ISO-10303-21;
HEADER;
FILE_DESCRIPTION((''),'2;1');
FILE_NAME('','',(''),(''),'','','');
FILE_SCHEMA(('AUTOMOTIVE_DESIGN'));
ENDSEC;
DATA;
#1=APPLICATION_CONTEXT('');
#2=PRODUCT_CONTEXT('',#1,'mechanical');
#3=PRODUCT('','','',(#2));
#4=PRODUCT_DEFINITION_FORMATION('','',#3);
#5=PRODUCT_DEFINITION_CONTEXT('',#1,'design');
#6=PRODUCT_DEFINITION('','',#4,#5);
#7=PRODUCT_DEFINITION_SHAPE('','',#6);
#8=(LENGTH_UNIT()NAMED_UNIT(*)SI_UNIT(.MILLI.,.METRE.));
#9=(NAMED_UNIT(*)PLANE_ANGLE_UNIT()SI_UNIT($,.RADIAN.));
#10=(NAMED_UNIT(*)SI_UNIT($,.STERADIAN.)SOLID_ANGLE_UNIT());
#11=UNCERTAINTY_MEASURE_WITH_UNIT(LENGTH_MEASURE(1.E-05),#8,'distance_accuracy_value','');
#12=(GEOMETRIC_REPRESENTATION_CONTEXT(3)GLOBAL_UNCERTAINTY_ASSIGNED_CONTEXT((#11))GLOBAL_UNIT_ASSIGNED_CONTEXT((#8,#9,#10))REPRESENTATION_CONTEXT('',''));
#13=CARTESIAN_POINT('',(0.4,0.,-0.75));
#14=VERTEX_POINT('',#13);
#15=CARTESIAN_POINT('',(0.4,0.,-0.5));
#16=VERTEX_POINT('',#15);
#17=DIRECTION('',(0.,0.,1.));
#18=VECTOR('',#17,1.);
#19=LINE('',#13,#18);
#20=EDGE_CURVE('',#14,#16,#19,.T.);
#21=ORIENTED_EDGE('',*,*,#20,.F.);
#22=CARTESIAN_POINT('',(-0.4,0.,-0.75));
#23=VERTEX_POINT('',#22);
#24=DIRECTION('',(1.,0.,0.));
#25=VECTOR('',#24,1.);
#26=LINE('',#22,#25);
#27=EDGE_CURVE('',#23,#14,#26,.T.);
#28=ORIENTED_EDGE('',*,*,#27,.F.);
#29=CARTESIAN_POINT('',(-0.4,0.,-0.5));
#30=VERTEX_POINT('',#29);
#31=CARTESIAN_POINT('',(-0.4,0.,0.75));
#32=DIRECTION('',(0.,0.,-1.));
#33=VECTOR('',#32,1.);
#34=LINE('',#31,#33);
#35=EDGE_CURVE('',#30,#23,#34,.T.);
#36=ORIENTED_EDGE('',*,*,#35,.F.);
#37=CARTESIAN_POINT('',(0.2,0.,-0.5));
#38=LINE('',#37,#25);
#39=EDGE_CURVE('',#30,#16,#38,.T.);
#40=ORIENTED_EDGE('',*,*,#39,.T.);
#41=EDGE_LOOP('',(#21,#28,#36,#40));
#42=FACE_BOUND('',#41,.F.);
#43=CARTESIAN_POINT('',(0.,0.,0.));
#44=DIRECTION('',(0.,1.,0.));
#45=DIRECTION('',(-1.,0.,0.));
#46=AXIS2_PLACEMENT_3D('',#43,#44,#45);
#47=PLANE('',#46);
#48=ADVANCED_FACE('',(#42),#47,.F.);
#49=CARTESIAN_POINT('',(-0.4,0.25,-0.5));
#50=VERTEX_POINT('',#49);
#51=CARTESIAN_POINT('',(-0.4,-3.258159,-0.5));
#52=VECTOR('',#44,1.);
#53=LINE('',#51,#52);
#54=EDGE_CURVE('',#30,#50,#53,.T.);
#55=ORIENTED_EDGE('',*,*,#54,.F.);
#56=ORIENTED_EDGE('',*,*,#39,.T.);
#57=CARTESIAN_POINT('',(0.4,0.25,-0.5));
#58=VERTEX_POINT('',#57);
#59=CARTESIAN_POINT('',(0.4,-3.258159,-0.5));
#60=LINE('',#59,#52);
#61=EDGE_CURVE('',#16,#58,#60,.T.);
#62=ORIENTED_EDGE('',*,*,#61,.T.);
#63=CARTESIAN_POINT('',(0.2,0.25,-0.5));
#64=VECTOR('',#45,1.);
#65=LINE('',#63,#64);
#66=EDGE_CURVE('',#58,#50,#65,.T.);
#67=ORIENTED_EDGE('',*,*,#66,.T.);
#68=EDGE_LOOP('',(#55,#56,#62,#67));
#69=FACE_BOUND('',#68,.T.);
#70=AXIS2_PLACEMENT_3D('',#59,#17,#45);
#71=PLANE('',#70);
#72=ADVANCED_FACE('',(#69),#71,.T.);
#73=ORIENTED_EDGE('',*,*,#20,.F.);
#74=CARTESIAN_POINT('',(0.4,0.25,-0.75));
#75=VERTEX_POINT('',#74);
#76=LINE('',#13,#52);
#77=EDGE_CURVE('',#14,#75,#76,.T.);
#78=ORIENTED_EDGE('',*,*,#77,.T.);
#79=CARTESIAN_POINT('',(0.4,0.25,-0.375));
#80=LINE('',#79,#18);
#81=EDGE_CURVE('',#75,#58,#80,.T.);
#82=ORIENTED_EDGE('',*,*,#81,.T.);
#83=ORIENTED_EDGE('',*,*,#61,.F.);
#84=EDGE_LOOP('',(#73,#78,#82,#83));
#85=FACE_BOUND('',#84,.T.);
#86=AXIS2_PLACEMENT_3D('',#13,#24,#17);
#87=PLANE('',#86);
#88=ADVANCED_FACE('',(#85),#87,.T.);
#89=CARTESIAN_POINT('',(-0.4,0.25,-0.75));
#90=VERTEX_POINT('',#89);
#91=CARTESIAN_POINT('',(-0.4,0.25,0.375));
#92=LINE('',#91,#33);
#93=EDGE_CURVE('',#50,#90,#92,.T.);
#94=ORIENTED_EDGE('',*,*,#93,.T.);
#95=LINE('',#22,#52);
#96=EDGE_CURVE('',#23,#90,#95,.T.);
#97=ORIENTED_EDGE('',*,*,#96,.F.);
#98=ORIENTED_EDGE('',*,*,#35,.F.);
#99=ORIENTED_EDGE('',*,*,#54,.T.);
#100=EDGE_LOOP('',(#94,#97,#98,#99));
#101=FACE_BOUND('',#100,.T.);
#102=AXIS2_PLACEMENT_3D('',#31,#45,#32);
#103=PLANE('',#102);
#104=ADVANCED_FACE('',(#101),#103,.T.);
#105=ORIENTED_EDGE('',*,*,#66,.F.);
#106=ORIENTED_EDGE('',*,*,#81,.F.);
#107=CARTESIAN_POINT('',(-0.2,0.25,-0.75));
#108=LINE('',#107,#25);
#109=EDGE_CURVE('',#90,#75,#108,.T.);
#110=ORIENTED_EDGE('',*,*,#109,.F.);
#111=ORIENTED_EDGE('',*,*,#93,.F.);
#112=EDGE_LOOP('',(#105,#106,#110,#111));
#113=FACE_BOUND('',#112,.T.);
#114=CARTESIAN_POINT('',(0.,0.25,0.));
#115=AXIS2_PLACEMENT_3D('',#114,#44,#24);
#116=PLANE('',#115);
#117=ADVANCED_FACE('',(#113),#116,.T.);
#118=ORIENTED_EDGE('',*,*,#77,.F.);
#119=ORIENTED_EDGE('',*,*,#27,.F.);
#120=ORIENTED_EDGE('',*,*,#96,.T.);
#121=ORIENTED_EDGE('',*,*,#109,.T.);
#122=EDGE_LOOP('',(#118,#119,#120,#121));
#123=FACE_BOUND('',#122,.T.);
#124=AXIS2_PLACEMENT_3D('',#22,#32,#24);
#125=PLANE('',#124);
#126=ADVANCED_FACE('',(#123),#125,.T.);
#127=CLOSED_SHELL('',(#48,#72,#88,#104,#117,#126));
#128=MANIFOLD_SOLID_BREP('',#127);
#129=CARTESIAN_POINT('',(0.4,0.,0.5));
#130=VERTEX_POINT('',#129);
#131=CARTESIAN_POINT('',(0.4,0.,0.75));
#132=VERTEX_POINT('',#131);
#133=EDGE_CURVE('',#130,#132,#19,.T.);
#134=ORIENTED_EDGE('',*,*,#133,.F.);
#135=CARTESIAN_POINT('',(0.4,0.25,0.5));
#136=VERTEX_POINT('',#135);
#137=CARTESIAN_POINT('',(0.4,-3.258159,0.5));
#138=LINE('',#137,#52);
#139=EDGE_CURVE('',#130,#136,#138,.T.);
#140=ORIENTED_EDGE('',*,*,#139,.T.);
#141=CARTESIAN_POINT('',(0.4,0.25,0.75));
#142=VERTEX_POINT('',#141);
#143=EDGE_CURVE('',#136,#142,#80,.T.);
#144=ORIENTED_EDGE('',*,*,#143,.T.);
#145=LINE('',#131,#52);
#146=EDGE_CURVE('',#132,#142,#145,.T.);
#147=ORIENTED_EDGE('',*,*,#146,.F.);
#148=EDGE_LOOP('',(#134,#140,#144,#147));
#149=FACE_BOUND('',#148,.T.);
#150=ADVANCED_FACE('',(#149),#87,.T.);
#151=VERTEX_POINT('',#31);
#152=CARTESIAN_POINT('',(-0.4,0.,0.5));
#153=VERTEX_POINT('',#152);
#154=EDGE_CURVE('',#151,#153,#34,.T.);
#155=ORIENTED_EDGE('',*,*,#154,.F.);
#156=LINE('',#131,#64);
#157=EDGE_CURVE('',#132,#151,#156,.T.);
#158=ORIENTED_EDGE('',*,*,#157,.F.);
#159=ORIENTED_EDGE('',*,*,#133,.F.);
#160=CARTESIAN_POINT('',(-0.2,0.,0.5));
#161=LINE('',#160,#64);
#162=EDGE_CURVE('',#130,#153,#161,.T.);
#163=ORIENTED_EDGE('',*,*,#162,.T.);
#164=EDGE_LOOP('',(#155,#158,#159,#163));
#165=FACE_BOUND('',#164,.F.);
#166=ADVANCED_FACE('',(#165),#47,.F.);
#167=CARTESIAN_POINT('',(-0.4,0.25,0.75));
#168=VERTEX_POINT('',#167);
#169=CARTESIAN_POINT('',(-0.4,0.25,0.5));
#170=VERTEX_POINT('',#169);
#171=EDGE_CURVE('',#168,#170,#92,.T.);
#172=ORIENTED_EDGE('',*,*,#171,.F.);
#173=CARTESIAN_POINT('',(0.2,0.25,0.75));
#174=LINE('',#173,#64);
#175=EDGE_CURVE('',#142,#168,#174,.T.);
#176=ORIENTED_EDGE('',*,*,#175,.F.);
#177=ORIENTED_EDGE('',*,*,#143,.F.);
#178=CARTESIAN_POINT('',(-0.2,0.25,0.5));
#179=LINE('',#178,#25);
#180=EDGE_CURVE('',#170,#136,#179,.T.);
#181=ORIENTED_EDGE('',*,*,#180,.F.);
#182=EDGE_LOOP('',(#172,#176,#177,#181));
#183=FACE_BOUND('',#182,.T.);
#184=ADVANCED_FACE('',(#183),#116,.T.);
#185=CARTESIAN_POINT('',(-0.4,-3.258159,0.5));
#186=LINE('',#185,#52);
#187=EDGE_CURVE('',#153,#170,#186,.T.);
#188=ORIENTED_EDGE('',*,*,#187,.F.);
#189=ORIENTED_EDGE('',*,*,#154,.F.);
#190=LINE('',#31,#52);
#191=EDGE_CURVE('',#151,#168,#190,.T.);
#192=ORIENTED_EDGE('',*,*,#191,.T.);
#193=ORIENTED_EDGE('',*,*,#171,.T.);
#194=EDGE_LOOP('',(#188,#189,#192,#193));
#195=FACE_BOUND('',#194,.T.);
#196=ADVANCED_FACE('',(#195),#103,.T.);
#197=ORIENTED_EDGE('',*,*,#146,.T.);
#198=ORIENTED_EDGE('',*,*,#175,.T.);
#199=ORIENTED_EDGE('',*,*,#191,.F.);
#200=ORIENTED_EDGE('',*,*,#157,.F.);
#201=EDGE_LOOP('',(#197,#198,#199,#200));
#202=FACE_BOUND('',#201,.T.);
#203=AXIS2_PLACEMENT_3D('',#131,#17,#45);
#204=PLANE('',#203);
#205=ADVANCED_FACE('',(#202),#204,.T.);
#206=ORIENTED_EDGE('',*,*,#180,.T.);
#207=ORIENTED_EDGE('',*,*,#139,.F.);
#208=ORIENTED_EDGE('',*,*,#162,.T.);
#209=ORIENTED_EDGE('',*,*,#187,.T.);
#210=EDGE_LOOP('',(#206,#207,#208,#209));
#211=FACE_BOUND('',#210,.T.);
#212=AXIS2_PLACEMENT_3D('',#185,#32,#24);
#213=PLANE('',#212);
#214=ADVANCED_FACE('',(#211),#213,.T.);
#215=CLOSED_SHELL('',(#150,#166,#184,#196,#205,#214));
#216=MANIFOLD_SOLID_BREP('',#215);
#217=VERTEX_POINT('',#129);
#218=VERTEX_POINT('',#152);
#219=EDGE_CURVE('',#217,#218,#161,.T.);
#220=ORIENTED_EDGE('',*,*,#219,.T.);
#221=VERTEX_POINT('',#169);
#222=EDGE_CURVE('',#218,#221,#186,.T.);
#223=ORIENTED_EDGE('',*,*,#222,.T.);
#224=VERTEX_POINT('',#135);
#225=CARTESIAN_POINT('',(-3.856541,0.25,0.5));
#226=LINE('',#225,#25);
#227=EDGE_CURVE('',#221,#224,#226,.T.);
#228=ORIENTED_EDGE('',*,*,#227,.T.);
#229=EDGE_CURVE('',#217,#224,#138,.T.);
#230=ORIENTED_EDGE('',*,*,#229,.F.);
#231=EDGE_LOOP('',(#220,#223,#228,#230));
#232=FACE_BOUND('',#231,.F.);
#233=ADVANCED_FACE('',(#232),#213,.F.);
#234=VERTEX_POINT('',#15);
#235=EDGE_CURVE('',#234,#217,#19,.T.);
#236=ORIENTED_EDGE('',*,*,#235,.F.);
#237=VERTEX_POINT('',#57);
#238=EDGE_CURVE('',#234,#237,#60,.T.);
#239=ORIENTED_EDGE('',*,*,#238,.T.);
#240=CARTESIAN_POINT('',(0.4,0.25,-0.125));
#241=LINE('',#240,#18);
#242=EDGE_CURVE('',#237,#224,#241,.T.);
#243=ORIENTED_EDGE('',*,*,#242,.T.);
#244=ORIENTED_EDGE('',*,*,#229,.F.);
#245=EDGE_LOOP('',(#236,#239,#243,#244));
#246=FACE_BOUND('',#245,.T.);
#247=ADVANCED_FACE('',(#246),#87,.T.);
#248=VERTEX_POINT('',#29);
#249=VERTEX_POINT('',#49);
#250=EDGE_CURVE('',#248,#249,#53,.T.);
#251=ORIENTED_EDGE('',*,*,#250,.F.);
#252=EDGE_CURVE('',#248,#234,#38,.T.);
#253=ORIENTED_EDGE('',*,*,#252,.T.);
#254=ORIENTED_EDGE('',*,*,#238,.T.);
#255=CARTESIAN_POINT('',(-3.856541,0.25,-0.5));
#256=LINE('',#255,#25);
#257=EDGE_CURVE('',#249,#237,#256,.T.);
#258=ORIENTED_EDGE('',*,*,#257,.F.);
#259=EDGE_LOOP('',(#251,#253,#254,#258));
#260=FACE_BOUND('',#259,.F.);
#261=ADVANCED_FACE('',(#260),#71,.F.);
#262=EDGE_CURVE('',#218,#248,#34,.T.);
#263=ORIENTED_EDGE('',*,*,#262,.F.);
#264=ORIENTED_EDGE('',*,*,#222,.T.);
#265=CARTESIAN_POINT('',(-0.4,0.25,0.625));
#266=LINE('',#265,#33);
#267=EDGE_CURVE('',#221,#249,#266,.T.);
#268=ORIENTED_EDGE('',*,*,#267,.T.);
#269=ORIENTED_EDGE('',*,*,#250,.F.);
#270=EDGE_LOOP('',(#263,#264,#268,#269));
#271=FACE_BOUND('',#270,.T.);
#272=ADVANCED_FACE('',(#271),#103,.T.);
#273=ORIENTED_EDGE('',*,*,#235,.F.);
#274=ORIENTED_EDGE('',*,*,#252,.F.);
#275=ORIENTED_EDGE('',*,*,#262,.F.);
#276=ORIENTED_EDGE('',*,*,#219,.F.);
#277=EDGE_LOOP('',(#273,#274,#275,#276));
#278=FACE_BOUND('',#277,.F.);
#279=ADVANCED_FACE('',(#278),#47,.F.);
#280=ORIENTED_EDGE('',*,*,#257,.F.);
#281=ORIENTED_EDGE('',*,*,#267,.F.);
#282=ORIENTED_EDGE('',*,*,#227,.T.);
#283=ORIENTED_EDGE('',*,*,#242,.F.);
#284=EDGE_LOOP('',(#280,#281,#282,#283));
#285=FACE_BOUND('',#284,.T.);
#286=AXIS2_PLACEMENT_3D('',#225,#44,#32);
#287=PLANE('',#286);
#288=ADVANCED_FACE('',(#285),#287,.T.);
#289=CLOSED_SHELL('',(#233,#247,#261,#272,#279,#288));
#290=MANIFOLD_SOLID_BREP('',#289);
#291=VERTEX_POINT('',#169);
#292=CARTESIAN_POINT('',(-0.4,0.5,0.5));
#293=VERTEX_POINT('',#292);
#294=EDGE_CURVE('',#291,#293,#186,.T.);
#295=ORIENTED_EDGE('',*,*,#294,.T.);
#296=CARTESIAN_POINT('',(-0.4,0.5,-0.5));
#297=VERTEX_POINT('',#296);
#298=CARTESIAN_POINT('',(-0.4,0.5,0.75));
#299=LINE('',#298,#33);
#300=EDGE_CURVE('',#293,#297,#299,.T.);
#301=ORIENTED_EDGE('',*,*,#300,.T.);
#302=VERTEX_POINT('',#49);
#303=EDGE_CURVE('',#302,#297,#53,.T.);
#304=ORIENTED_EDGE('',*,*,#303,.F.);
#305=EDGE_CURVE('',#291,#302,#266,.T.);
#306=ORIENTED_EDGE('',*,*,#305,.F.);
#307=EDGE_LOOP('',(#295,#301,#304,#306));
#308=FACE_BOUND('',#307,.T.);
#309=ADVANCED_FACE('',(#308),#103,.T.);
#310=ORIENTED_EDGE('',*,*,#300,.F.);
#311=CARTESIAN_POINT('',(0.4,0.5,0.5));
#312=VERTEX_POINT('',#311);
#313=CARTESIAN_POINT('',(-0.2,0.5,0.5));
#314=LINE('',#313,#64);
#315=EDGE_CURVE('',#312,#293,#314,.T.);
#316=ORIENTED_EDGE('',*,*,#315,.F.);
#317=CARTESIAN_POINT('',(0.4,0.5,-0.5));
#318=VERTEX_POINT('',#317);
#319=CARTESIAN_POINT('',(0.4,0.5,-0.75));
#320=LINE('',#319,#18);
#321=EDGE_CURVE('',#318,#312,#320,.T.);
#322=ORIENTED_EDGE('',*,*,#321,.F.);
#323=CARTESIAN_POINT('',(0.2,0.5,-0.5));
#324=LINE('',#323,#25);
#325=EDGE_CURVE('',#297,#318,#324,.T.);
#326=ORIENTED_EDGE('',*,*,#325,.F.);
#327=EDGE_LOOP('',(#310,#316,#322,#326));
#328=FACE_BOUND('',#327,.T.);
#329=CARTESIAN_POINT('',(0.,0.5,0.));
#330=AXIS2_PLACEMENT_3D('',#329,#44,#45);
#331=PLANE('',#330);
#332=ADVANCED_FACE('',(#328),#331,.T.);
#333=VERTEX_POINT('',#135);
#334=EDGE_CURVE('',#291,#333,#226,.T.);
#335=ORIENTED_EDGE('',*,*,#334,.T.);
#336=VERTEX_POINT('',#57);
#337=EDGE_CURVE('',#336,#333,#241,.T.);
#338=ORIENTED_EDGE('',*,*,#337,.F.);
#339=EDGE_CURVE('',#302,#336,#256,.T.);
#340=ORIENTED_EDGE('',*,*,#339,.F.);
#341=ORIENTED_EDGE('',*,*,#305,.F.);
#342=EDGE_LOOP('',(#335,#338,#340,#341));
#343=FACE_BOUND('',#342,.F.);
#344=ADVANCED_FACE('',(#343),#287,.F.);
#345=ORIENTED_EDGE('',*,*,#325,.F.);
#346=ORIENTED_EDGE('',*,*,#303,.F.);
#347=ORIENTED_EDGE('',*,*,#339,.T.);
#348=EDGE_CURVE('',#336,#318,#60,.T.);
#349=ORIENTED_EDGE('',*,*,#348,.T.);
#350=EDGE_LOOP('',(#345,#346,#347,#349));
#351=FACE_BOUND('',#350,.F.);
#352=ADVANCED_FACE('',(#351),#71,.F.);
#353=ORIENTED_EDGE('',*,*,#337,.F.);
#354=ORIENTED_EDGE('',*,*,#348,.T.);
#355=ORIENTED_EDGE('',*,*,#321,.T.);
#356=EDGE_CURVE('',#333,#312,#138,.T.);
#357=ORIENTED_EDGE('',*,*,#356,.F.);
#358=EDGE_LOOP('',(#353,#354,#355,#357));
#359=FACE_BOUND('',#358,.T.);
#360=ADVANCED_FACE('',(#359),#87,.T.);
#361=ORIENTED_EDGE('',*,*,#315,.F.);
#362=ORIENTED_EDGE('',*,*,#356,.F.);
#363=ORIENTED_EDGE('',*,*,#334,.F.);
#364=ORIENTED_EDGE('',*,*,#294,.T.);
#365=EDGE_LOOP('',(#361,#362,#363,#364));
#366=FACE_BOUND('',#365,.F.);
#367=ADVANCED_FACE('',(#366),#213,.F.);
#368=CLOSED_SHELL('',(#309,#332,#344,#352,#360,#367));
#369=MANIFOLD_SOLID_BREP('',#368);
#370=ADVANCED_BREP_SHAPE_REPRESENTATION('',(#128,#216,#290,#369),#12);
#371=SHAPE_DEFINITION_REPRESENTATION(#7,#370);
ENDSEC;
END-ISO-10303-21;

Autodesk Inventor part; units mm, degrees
ref_plane "YZ Plane" through (0, 0, 0) normal (1, 0, 0) x (0, 1, 0)
ref_plane "XZ Plane" through (0, 0, 0) normal (0, 1, 0) x (-1, 0, 0)
ref_plane "XY Plane" through (0, 0, 0) normal (0, 0, 1) x (1, 0, 0)
sketch "Sketch1" plane through (0, 0, 0) normal (0, 1, 0) x (-1, 0, 0)
  line L0 (-0.4, 0.75) -> (0.4, 0.75)
  line L1 (0.4, 0.75) -> (0.4, -0.75)
  line L2 (0.4, -0.75) -> (-0.4, -0.75)
  line L3 (-0.4, -0.75) -> (-0.4, 0.75)
  line L4 (-0.4, 0.75) -> (0.4, -0.75) construction
  line L5 (0.4, 0.75) -> (-0.4, -0.75) construction
  point P0 (0, 0)
  dimension "d0" = 0.8
  dimension "d1" = 1.5
extrude "Extrusion1" add sketch "Sketch1" along normal blind 0.5
sketch "Sketch2" plane through (0, 0.5, 0) normal (0, 1, 0) x (1, 0, 0)
  line L0 (0.4, -0.5) -> (-0.4, -0.5)
  line L1 (-0.4, -0.5) -> (0.4, -0.5)
  line L2 (0.4, -0.75) -> (0.4, 0.75) projected
  line L3 (-0.4, -0.5) -> (0.4, -0.5)
  line L4 (0.4, -0.5) -> (0.4, 0.5)
  line L5 (0.4, 0.5) -> (-0.4, 0.5)
  line L6 (-0.4, 0.5) -> (-0.4, -0.5)
  point P0 (0, 0)
  point P1 (-0.4, 0.75)
  point P2 (-0.4, -0.75)
  dimension "d6" = 1
split body "Split1" sketch "Sketch2" result two bodies curves L4 L5 L6 L3 first body at (0.1333, 0.1, 0.1667)
sketch "Sketch3" plane through (0, 0.5, 0) normal (0, 1, 0) x (1, 0, 0)
  line L0 (-0.8884, -1.0057) -> (0.9425, -1.0057)
  line L1 (0.9425, -1.0057) -> (0.9425, 1.4927)
  line L2 (0.9425, 1.4927) -> (-0.8884, 1.4927)
  line L3 (-0.8884, 1.4927) -> (-0.8884, -1.0057)
  point P0 (0, 0)
extrude "Extrusion2" cut sketch "Sketch3" against normal blind 0.25 bodies 3
sketch "Sketch4" plane through (0.4, 0, 0.5) normal (1, 0, 0) x (0, 0, -1)
  line L0 (0, 0.5) -> (0, 0) projected
  line L1 (1, 0.5) -> (1, 0) projected
  line L2 (0, 0.25) -> (1, 0.25)
  line L3 (1, 0.25) -> (1, 0)
  line L4 (1, 0) -> (0, 0)
  line L5 (0, 0) -> (0, 0.25)
  point P0 (0.5, 0)
split body "Split2" sketch "Sketch4" result two bodies bodies 2 curves L2 L3 L4 L5 first body at (0.1333, 0.4, 0.1667)
properties part number "Led_0603"
